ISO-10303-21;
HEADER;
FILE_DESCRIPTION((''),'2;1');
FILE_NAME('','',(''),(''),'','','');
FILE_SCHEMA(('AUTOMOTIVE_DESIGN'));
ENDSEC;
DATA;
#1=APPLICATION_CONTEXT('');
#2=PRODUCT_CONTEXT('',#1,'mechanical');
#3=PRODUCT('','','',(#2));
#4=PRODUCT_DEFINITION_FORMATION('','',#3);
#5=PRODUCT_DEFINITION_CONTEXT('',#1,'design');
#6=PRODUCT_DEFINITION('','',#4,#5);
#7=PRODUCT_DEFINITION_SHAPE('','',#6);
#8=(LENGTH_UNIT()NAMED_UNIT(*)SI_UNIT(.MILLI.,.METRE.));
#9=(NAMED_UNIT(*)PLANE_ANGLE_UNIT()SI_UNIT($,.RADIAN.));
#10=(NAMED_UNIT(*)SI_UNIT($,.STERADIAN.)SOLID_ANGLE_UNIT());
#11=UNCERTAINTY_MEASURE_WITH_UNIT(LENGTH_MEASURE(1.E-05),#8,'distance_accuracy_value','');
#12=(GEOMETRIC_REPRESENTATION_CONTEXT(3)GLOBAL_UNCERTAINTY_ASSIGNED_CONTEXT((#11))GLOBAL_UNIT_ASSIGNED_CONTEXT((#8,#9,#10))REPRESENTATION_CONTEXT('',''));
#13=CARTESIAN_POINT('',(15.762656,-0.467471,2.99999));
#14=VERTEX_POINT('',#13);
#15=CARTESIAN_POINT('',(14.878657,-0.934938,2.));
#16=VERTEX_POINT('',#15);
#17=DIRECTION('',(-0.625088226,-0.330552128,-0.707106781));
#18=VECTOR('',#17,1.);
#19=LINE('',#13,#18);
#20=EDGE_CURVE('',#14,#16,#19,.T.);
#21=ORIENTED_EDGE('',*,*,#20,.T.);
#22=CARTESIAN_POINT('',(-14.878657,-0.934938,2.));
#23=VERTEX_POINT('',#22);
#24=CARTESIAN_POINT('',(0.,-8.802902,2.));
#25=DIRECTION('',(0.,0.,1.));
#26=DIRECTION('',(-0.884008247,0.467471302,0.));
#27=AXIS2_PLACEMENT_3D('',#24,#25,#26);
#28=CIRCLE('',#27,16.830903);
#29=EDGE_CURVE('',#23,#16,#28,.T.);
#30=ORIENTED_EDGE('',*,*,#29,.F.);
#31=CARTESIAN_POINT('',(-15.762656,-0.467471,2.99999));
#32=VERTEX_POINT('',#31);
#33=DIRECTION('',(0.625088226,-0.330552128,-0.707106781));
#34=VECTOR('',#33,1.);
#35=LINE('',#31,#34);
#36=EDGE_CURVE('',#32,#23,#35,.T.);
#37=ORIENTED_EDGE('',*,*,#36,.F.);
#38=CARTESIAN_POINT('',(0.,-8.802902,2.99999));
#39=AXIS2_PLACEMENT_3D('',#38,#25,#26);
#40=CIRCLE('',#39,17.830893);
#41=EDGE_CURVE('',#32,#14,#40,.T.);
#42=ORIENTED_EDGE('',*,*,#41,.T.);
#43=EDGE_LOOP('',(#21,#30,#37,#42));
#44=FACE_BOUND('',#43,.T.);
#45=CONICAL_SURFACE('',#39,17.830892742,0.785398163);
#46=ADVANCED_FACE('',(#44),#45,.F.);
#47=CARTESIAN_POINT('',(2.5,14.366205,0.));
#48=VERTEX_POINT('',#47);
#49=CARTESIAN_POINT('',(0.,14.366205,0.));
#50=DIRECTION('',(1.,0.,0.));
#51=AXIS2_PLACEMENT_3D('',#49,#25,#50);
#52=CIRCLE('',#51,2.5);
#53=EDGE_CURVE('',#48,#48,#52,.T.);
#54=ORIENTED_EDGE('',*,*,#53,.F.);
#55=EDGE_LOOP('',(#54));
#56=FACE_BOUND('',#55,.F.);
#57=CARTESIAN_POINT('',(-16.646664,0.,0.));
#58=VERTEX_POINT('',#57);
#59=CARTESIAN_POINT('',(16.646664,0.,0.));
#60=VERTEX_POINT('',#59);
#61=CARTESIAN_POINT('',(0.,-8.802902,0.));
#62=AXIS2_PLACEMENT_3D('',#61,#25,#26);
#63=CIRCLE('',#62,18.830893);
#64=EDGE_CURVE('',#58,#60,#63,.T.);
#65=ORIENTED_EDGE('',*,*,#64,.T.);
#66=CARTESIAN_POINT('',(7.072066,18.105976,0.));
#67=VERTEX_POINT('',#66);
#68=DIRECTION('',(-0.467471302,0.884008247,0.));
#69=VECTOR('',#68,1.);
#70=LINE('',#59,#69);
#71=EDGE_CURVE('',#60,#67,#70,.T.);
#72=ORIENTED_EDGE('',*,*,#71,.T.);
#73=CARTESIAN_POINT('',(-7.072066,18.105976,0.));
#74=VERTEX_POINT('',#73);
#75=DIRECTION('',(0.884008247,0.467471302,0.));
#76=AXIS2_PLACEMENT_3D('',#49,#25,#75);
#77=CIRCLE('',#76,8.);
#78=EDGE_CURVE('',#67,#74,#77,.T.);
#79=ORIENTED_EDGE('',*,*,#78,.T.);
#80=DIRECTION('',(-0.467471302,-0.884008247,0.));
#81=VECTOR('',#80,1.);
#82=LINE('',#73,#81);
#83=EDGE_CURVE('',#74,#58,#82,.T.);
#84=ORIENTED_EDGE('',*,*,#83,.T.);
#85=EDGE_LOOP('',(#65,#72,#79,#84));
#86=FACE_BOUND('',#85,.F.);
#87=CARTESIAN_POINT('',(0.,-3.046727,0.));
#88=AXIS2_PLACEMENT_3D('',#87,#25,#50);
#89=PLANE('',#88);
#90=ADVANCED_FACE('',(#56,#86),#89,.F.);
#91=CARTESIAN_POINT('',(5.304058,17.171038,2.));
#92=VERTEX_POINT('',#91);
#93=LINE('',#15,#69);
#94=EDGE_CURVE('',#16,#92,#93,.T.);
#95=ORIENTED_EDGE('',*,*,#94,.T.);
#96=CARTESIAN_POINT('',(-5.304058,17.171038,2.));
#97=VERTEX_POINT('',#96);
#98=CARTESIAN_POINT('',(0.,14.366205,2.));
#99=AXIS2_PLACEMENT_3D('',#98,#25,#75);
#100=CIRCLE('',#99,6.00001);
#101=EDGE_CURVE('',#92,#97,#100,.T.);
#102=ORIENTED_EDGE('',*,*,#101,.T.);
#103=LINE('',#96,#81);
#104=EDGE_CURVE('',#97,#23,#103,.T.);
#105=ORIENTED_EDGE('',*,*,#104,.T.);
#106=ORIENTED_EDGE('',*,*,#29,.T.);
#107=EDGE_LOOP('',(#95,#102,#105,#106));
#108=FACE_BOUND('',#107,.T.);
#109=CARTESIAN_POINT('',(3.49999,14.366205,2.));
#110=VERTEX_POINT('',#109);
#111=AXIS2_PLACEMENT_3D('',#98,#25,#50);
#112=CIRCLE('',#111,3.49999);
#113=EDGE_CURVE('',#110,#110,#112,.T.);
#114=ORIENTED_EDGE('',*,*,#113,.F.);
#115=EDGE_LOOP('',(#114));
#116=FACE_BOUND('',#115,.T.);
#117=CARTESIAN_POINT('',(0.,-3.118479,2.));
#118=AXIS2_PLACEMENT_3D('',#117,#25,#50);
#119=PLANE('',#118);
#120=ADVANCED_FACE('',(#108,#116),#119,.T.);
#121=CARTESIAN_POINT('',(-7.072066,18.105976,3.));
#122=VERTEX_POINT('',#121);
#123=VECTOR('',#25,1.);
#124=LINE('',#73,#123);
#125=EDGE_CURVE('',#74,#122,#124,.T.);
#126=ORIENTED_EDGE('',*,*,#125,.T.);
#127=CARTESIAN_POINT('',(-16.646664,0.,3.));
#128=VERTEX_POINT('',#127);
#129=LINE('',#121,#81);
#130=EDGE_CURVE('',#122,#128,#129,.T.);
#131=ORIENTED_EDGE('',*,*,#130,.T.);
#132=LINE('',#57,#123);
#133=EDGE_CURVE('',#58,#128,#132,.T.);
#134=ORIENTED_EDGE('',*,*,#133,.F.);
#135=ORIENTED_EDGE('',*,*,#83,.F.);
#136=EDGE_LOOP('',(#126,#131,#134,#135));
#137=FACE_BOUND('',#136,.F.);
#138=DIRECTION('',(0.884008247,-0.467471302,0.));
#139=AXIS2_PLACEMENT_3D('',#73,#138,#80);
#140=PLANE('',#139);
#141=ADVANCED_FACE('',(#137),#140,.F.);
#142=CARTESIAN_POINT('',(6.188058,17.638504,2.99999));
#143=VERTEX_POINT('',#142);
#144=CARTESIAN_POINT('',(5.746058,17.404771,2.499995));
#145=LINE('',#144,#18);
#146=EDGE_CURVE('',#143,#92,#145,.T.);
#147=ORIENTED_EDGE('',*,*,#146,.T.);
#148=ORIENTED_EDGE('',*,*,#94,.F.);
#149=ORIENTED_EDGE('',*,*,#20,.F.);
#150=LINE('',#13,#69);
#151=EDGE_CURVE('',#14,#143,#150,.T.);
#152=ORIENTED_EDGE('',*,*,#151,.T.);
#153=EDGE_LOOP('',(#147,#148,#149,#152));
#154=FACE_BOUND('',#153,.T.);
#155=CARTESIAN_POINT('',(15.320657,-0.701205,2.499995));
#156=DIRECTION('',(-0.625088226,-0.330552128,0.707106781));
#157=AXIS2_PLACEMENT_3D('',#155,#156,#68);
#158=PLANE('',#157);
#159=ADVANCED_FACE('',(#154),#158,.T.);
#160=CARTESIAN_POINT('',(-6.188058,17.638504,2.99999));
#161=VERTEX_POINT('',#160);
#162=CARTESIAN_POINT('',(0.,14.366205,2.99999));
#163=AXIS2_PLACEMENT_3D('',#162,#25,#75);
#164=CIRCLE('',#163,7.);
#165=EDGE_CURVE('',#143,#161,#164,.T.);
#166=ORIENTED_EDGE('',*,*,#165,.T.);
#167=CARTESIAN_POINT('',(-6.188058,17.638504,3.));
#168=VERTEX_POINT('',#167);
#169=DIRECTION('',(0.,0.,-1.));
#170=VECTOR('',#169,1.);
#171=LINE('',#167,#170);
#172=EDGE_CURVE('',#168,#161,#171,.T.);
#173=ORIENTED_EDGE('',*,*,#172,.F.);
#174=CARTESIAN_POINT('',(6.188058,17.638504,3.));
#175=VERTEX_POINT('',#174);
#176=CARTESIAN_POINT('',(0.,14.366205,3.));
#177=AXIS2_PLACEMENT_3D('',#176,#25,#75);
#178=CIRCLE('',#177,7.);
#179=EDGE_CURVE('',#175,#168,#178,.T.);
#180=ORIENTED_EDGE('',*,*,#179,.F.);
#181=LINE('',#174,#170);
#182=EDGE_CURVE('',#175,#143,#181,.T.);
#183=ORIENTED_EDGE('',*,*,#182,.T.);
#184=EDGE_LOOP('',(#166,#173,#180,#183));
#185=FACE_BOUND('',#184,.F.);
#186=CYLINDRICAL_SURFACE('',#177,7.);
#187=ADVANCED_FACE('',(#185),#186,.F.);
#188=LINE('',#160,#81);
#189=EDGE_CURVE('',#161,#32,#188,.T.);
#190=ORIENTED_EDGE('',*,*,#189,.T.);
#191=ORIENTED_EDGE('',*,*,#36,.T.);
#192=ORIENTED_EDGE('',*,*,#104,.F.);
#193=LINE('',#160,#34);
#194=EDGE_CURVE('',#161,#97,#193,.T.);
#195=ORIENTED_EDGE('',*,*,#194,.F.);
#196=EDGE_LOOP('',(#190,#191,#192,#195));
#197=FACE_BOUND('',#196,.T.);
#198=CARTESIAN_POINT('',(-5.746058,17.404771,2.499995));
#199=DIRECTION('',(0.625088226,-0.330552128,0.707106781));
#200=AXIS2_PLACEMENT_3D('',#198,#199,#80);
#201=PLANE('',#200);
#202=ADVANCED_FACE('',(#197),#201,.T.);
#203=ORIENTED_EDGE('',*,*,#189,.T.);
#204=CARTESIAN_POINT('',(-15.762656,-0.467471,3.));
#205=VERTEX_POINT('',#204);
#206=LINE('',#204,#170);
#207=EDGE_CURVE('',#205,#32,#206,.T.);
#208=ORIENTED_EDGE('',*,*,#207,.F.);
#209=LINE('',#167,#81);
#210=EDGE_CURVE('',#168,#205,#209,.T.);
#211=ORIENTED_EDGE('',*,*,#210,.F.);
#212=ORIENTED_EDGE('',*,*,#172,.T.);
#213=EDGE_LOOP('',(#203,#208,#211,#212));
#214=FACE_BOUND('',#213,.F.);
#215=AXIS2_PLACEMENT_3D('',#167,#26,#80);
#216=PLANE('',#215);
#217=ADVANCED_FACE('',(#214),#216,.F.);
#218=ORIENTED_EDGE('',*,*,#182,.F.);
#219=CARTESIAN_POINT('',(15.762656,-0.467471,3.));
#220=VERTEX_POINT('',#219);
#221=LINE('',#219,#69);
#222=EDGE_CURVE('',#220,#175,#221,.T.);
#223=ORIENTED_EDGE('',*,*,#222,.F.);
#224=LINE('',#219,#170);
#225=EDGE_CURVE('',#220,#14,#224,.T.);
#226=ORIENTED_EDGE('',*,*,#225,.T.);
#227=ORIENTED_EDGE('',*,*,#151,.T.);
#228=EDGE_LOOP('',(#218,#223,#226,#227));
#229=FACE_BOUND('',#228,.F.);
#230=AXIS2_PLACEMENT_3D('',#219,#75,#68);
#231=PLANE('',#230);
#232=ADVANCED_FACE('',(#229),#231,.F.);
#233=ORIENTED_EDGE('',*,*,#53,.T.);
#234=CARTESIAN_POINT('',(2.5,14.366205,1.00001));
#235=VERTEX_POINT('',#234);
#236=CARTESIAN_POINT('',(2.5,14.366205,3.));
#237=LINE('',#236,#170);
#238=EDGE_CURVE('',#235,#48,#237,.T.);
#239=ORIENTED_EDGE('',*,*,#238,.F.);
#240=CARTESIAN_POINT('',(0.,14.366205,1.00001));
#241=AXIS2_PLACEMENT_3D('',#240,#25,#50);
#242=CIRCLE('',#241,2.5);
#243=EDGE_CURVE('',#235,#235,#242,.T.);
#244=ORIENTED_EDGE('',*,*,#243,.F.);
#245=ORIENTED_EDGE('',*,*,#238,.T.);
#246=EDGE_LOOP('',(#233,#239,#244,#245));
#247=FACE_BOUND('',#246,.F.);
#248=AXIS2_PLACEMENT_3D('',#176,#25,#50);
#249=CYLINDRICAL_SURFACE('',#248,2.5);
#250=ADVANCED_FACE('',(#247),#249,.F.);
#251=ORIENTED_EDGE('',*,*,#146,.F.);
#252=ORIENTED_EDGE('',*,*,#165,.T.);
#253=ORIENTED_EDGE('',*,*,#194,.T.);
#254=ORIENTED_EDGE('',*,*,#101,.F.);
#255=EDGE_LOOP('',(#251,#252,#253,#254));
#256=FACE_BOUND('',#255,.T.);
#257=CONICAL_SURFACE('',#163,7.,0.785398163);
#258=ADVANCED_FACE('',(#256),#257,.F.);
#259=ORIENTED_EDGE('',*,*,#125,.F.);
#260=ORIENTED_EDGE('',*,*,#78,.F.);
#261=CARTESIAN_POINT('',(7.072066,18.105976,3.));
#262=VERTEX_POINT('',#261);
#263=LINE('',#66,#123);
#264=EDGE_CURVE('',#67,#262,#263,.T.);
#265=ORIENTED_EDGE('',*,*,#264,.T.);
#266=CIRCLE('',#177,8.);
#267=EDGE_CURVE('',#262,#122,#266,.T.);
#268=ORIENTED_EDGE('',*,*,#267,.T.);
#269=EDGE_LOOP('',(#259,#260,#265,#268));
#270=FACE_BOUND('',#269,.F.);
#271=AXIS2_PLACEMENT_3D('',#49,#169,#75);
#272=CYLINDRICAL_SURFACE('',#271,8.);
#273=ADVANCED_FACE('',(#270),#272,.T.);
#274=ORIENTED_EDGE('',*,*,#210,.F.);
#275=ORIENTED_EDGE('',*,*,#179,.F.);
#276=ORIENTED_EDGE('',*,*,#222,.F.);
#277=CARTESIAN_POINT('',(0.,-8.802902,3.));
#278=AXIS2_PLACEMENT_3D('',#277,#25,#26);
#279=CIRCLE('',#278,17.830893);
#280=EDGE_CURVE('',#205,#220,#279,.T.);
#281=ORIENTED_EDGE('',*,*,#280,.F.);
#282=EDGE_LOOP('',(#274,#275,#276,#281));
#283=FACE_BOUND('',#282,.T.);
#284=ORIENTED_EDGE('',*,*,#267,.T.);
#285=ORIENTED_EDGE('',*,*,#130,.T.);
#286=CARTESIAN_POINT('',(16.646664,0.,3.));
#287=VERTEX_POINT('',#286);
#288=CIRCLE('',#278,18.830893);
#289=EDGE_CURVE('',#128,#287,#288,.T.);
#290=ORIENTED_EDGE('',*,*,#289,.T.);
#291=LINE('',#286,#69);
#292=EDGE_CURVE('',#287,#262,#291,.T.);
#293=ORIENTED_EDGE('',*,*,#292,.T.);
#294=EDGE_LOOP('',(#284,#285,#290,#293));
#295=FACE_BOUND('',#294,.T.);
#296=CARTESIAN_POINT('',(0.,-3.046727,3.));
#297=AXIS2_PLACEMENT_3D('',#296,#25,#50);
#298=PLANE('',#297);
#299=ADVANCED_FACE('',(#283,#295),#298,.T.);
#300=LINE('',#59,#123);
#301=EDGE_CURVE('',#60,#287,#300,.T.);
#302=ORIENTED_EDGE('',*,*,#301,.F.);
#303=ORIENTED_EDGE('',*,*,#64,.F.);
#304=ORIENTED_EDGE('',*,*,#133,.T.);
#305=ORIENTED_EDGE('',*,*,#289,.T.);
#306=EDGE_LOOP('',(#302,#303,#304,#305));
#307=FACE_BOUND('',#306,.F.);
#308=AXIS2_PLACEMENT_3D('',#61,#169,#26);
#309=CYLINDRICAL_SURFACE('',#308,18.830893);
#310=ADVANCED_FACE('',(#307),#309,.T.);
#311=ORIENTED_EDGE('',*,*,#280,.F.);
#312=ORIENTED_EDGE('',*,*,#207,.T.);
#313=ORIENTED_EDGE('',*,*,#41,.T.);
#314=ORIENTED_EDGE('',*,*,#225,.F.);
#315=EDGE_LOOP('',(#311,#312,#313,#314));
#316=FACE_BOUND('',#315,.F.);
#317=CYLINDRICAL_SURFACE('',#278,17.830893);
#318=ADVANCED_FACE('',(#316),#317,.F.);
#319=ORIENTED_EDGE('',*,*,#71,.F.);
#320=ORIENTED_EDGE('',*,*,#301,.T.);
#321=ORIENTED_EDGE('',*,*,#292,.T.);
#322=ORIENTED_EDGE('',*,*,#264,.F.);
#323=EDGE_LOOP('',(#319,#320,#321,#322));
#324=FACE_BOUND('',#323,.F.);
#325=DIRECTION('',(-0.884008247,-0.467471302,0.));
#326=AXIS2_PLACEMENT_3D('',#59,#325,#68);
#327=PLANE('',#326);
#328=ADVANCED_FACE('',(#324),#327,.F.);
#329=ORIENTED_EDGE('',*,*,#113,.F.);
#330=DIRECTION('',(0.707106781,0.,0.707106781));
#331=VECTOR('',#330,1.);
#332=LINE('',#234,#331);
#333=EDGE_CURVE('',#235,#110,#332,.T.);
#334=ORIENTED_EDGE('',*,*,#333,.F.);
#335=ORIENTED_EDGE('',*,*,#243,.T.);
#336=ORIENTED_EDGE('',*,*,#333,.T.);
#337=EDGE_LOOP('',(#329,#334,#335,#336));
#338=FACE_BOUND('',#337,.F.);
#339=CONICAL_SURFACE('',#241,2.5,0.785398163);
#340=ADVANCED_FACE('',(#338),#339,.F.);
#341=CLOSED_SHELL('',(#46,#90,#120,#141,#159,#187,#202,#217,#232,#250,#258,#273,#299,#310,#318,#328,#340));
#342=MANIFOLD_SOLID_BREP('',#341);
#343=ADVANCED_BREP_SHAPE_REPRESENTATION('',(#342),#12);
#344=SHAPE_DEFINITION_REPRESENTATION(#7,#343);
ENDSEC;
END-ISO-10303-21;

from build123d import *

# Parameters (mm, degrees)
F1_DEPTH = 3
F2_R     = 2.5
F3_DEPTH = 25
F5_DEPTH = 1
F6_SIZE  = 0.99999


# Not quite as in the source:
# - a fillet or chamfer is up to 0.001 mm smaller than in the source, because OpenCascade refuses the exact size


with BuildPart() as f1:
    # F0 (on Top) → F1 (new body)
    with BuildSketch(Plane.XY):
        with BuildLine():
            Line((-7.0720659795, 18.1059757224), (-16.646664491, 0))
            ThreePointArc((-16.646664491, 0), (0, -27.6337946959), (16.646664491, 0))
            Line((16.646664491, 0), (7.0720659795, 18.1059757224))
            ThreePointArc((7.0720659795, 18.1059757224), (0, 22.3662053041), (-7.0720659795, 18.1059757224))
        make_face()
    extrude(amount=F1_DEPTH)

    # F2 (on face) → F3 (cut)
    with BuildSketch(Plane.XY.offset(3)):
        with Locations((0, 14.3662053041)):
            Circle(F2_R)
    extrude(amount=-F3_DEPTH, mode=Mode.SUBTRACT)

    # F4 (on face) → F5 (cut)
    with BuildSketch(Plane.XY.offset(3)):
        with BuildLine():
            Line((15.7626562435, -0.4674713023), (6.1880577321, 17.6385044201))
            ThreePointArc((6.1880577321, 17.6385044201), (0, 21.3662053041), (-6.1880577321, 17.6385044201))
            Line((-6.1880577321, 17.6385044201), (-15.7626562435, -0.4674713023))
            ThreePointArc((-15.7626562435, -0.4674713023), (0, -26.6337946959), (15.7626562435, -0.4674713023))
        make_face()
    extrude(amount=-F5_DEPTH, mode=Mode.SUBTRACT)

    # F6 (size 1 in the source; OpenCascade refuses exactly that, so slightly less here)
    f6_edges = [f1.edges().sort_by_distance(p)[0] for p in [
        (0, -26.633795, 2),
        (-10.975357, 8.585517, 2),
        (10.975357, 8.585517, 2),
        (0, 21.366205, 2),
        (-2.5, 14.366205, 2),
    ]]
    chamfer(f6_edges, length=F6_SIZE)


solid = f1.part
